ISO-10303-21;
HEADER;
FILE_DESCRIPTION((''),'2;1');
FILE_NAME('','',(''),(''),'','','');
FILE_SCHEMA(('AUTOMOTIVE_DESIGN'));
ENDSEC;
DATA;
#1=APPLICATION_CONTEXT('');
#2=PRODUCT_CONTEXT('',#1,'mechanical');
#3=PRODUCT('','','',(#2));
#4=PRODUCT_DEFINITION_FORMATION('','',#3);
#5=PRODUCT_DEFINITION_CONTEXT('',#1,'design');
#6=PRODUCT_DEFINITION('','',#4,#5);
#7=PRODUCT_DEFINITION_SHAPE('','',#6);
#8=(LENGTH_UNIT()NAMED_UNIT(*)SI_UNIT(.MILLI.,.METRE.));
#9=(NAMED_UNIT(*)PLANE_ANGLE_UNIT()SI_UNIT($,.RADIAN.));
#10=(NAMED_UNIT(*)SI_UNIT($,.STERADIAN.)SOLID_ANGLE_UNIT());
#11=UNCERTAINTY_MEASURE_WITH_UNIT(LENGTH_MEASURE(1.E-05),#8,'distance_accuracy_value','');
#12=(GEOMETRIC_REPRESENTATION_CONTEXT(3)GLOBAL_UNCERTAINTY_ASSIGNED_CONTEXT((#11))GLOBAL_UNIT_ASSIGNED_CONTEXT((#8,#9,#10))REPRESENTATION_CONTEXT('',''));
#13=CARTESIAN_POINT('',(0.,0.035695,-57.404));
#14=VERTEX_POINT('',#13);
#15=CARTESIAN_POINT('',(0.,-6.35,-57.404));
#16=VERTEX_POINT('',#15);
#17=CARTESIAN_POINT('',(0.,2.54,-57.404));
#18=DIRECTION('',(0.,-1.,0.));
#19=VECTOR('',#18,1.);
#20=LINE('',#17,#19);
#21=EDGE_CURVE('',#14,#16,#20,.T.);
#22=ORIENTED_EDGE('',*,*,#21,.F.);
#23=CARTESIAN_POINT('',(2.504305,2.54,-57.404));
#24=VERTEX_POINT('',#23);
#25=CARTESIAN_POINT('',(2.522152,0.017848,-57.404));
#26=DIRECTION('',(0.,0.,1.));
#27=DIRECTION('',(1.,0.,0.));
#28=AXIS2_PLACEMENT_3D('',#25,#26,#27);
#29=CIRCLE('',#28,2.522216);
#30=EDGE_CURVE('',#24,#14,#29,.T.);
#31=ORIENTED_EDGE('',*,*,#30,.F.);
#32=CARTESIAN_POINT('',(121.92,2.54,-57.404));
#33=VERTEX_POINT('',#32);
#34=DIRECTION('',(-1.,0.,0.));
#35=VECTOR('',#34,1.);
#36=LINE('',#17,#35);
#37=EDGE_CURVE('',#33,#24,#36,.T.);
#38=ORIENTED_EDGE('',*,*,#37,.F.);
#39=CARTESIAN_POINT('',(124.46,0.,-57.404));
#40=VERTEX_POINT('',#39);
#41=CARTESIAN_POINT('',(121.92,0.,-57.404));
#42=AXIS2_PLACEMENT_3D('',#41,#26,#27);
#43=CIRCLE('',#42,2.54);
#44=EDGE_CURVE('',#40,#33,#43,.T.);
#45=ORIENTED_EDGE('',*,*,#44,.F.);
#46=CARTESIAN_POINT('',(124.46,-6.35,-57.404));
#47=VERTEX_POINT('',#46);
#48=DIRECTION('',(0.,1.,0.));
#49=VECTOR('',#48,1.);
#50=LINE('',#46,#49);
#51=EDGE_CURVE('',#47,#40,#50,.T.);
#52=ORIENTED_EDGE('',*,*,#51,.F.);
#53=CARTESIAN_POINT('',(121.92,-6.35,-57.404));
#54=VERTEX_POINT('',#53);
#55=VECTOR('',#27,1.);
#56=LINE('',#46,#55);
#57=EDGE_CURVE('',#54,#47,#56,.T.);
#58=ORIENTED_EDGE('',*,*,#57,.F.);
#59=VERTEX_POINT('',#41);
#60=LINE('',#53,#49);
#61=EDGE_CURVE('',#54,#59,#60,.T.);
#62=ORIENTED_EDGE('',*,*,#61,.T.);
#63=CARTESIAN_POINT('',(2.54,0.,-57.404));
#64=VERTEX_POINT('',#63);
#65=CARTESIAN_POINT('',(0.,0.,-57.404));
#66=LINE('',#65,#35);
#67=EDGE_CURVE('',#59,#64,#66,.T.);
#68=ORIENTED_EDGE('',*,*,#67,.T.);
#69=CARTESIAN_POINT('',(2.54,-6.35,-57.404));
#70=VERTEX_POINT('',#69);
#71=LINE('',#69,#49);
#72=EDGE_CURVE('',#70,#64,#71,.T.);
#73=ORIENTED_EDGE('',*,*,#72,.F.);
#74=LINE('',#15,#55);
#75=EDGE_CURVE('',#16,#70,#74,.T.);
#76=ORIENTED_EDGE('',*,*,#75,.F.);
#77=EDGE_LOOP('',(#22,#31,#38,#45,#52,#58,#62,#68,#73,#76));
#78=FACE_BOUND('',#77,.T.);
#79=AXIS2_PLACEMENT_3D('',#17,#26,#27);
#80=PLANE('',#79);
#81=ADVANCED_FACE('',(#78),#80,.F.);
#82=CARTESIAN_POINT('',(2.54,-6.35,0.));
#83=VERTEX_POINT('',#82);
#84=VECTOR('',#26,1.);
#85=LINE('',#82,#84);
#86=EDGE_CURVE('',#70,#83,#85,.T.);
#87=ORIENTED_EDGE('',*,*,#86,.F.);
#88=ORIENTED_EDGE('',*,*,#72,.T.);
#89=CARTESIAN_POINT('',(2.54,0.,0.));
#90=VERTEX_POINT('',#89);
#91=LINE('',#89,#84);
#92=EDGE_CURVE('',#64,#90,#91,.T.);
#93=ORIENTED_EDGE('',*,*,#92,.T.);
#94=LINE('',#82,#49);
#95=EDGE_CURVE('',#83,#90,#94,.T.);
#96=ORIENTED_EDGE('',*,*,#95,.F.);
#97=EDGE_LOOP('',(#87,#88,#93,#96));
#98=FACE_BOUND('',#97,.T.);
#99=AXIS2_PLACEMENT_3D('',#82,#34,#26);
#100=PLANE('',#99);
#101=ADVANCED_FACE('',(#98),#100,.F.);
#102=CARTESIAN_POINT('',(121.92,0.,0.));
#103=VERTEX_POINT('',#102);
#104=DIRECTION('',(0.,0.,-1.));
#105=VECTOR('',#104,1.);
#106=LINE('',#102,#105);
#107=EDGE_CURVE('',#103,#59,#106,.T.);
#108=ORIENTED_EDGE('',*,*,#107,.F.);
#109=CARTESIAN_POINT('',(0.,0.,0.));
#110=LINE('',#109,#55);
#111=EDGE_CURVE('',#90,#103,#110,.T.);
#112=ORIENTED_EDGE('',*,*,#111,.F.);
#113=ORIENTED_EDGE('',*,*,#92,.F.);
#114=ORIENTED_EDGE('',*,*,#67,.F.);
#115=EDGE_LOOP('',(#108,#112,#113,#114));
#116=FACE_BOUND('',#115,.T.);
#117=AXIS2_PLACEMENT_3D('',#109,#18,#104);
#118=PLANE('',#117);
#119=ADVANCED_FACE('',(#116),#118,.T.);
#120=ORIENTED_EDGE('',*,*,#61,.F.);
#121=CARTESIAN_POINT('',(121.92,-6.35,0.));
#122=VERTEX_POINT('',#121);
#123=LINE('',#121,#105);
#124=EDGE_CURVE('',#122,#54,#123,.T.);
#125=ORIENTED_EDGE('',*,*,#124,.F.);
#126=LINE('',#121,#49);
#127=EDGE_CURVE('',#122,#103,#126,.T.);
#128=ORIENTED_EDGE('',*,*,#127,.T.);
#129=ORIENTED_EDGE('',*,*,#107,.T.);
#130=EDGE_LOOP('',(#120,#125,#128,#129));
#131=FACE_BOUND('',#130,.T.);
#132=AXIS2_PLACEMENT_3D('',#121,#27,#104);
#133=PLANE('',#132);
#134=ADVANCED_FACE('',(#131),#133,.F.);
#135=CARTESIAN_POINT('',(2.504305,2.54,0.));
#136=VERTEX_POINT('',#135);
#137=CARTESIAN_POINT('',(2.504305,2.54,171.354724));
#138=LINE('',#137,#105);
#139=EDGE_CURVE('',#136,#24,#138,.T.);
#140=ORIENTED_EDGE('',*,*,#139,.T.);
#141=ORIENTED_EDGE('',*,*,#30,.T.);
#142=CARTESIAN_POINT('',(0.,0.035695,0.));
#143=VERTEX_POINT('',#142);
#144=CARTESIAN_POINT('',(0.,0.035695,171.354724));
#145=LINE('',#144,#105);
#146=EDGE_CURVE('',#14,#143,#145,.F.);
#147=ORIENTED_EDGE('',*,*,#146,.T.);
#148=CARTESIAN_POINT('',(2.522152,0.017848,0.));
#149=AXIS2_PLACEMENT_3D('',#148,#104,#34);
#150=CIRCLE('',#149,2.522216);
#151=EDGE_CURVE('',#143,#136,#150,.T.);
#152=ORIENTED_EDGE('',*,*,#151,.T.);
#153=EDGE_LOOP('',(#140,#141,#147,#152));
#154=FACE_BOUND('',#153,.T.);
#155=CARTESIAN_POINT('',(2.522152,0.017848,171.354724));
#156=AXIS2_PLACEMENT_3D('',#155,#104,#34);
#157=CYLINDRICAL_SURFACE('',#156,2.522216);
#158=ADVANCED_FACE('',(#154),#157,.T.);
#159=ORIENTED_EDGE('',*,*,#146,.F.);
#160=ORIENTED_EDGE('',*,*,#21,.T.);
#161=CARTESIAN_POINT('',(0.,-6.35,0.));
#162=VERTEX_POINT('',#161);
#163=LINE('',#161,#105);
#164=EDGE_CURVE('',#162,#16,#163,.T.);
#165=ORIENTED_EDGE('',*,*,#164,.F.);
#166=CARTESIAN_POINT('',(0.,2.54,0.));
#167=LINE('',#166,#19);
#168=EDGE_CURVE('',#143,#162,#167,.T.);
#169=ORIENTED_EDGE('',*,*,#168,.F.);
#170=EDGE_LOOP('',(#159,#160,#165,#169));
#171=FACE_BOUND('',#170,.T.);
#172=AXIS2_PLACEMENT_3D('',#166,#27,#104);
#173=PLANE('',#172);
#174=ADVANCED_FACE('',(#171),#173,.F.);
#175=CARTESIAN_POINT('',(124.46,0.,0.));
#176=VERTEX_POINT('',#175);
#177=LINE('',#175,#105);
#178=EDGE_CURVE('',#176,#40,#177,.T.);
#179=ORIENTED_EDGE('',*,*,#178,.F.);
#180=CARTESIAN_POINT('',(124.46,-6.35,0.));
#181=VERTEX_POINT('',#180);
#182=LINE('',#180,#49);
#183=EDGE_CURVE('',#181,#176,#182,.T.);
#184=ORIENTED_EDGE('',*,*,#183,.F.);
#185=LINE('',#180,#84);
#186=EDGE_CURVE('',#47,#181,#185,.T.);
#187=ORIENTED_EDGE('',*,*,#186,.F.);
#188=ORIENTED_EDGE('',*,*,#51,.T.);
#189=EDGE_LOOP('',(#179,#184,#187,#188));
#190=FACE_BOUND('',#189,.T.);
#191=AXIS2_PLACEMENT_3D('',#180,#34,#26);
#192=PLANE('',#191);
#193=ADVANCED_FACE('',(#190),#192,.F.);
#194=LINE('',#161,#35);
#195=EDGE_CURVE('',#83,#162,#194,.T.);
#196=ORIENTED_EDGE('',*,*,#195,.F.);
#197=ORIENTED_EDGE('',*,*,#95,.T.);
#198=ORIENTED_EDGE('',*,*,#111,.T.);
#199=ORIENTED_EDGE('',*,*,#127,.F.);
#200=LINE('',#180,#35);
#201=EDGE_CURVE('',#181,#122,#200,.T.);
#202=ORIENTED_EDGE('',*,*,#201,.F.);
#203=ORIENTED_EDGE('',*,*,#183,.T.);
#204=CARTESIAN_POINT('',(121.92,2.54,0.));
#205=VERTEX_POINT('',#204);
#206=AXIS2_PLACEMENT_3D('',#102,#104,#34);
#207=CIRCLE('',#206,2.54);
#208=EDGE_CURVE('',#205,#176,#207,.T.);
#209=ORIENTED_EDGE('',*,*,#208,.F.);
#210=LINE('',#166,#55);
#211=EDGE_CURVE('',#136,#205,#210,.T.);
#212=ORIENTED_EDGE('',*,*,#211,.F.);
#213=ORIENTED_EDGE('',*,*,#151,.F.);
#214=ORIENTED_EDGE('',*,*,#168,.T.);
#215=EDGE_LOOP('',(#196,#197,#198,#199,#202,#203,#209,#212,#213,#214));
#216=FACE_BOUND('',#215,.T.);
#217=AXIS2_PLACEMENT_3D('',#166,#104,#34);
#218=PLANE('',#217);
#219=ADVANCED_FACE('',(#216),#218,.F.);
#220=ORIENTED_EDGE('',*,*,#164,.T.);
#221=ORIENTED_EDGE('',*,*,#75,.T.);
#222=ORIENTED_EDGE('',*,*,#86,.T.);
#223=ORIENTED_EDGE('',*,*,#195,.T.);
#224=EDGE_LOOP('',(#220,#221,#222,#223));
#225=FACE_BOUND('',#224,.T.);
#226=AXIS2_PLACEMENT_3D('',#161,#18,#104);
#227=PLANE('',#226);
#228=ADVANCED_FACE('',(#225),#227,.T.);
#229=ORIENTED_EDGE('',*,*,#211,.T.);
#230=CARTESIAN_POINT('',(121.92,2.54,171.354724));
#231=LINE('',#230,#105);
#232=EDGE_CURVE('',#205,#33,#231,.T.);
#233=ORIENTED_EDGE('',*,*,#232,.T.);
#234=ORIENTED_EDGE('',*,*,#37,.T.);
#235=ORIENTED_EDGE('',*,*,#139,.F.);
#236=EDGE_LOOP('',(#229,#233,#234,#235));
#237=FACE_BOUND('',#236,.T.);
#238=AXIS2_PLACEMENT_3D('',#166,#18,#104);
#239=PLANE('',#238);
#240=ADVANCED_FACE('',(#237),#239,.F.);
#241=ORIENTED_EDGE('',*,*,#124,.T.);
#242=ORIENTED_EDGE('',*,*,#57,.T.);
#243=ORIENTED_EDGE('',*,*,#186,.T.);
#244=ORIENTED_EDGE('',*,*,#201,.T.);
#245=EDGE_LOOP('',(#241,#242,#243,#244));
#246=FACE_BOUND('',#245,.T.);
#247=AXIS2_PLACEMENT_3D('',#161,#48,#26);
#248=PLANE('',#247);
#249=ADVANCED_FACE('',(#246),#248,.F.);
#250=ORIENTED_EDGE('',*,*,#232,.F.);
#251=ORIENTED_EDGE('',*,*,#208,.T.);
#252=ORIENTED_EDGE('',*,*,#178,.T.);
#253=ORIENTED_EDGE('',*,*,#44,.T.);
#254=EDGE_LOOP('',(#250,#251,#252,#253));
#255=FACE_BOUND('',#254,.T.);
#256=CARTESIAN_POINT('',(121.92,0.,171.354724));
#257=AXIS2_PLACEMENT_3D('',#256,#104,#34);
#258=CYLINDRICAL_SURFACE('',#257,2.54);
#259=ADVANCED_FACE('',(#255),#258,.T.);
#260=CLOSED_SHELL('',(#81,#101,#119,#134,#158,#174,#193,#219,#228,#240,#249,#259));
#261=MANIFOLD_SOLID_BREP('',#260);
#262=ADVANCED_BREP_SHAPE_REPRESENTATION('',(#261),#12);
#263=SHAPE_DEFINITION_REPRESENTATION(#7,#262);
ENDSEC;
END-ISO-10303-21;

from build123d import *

# Parameters (mm, degrees)
SKETCH1_W               = 124.46
SKETCH1_H               = 57.404
BOSS_EXTRUDE1_DEPTH     = 2.54
CUT_EXTRUDE1_START      = -57.404
CUT_EXTRUDE1_DEPTH      = 57.404
CUT_EXTRUDE2_DEPTH      = 138.083778822
CUT_EXTRUDE2_DEPTH_BACK = 138.083778822
SKETCH5_W               = 2.54
SKETCH5_H               = 57.404
BOSS_EXTRUDE2_DEPTH     = 6.35
SKETCH7_W               = 2.54
SKETCH7_H               = 57.404
BOSS_EXTRUDE3_DEPTH     = 6.35


# Read off the part's stored shape, not the designer's step: Cut-Extrude1
with BuildPart() as part:
    # Sketch1 → Boss-Extrude1 (new body)
    with BuildSketch(Plane(origin=(0, 0, 0), x_dir=(1, 0, 0), z_dir=(0, 1, 0))):
        with Locations((62.23, 28.702)):
            Rectangle(SKETCH1_W, SKETCH1_H)
    extrude(amount=BOSS_EXTRUDE1_DEPTH)

    # Cut-Extrude1 outline → Cut-Extrude1 (cut)
    with BuildSketch(Plane.XY.offset(CUT_EXTRUDE1_START)):
        with BuildLine():
            Line((0, 2.54), (0, 0.035695157))
            ThreePointArc((0, 0.035695157), (0.738676689, 1.801323311), (2.504304843, 2.54))
            Line((2.504304843, 2.54), (0, 2.54))
        make_face()
    extrude(amount=CUT_EXTRUDE1_DEPTH, mode=Mode.SUBTRACT)

    # Sketch4 → Cut-Extrude2 (cut, two sides: drawn at the far end of the back side and taken through both)
    with BuildSketch(Plane.XY.offset(-CUT_EXTRUDE2_DEPTH_BACK)):
        with BuildLine():
            Line((-137.051831338, 2.54), (121.92, 2.54))
            ThreePointArc((121.92, 2.54), (123.716051224, 1.796051224), (124.46, 0))
            Line((124.46, 0), (124.46, -258.971831338))
            Line((124.46, -258.971831338), (490.701476151, 107.269644813))
            Line((490.701476151, 107.269644813), (229.189644813, 368.781476151))
            Line((229.189644813, 368.781476151), (-137.051831338, 2.54))
        make_face()
    extrude(amount=CUT_EXTRUDE2_DEPTH + CUT_EXTRUDE2_DEPTH_BACK, mode=Mode.SUBTRACT)

    # Sketch5 → Boss-Extrude2 (add)
    with BuildSketch(Plane.XZ):
        with Locations((1.27, -28.702)):
            Rectangle(SKETCH5_W, SKETCH5_H)
    extrude(amount=BOSS_EXTRUDE2_DEPTH)

    # Sketch7 → Boss-Extrude3 (add)
    with BuildSketch(Plane.XZ):
        with Locations((123.19, -28.702)):
            Rectangle(SKETCH7_W, SKETCH7_H)
    extrude(amount=BOSS_EXTRUDE3_DEPTH)


solid = part.part
